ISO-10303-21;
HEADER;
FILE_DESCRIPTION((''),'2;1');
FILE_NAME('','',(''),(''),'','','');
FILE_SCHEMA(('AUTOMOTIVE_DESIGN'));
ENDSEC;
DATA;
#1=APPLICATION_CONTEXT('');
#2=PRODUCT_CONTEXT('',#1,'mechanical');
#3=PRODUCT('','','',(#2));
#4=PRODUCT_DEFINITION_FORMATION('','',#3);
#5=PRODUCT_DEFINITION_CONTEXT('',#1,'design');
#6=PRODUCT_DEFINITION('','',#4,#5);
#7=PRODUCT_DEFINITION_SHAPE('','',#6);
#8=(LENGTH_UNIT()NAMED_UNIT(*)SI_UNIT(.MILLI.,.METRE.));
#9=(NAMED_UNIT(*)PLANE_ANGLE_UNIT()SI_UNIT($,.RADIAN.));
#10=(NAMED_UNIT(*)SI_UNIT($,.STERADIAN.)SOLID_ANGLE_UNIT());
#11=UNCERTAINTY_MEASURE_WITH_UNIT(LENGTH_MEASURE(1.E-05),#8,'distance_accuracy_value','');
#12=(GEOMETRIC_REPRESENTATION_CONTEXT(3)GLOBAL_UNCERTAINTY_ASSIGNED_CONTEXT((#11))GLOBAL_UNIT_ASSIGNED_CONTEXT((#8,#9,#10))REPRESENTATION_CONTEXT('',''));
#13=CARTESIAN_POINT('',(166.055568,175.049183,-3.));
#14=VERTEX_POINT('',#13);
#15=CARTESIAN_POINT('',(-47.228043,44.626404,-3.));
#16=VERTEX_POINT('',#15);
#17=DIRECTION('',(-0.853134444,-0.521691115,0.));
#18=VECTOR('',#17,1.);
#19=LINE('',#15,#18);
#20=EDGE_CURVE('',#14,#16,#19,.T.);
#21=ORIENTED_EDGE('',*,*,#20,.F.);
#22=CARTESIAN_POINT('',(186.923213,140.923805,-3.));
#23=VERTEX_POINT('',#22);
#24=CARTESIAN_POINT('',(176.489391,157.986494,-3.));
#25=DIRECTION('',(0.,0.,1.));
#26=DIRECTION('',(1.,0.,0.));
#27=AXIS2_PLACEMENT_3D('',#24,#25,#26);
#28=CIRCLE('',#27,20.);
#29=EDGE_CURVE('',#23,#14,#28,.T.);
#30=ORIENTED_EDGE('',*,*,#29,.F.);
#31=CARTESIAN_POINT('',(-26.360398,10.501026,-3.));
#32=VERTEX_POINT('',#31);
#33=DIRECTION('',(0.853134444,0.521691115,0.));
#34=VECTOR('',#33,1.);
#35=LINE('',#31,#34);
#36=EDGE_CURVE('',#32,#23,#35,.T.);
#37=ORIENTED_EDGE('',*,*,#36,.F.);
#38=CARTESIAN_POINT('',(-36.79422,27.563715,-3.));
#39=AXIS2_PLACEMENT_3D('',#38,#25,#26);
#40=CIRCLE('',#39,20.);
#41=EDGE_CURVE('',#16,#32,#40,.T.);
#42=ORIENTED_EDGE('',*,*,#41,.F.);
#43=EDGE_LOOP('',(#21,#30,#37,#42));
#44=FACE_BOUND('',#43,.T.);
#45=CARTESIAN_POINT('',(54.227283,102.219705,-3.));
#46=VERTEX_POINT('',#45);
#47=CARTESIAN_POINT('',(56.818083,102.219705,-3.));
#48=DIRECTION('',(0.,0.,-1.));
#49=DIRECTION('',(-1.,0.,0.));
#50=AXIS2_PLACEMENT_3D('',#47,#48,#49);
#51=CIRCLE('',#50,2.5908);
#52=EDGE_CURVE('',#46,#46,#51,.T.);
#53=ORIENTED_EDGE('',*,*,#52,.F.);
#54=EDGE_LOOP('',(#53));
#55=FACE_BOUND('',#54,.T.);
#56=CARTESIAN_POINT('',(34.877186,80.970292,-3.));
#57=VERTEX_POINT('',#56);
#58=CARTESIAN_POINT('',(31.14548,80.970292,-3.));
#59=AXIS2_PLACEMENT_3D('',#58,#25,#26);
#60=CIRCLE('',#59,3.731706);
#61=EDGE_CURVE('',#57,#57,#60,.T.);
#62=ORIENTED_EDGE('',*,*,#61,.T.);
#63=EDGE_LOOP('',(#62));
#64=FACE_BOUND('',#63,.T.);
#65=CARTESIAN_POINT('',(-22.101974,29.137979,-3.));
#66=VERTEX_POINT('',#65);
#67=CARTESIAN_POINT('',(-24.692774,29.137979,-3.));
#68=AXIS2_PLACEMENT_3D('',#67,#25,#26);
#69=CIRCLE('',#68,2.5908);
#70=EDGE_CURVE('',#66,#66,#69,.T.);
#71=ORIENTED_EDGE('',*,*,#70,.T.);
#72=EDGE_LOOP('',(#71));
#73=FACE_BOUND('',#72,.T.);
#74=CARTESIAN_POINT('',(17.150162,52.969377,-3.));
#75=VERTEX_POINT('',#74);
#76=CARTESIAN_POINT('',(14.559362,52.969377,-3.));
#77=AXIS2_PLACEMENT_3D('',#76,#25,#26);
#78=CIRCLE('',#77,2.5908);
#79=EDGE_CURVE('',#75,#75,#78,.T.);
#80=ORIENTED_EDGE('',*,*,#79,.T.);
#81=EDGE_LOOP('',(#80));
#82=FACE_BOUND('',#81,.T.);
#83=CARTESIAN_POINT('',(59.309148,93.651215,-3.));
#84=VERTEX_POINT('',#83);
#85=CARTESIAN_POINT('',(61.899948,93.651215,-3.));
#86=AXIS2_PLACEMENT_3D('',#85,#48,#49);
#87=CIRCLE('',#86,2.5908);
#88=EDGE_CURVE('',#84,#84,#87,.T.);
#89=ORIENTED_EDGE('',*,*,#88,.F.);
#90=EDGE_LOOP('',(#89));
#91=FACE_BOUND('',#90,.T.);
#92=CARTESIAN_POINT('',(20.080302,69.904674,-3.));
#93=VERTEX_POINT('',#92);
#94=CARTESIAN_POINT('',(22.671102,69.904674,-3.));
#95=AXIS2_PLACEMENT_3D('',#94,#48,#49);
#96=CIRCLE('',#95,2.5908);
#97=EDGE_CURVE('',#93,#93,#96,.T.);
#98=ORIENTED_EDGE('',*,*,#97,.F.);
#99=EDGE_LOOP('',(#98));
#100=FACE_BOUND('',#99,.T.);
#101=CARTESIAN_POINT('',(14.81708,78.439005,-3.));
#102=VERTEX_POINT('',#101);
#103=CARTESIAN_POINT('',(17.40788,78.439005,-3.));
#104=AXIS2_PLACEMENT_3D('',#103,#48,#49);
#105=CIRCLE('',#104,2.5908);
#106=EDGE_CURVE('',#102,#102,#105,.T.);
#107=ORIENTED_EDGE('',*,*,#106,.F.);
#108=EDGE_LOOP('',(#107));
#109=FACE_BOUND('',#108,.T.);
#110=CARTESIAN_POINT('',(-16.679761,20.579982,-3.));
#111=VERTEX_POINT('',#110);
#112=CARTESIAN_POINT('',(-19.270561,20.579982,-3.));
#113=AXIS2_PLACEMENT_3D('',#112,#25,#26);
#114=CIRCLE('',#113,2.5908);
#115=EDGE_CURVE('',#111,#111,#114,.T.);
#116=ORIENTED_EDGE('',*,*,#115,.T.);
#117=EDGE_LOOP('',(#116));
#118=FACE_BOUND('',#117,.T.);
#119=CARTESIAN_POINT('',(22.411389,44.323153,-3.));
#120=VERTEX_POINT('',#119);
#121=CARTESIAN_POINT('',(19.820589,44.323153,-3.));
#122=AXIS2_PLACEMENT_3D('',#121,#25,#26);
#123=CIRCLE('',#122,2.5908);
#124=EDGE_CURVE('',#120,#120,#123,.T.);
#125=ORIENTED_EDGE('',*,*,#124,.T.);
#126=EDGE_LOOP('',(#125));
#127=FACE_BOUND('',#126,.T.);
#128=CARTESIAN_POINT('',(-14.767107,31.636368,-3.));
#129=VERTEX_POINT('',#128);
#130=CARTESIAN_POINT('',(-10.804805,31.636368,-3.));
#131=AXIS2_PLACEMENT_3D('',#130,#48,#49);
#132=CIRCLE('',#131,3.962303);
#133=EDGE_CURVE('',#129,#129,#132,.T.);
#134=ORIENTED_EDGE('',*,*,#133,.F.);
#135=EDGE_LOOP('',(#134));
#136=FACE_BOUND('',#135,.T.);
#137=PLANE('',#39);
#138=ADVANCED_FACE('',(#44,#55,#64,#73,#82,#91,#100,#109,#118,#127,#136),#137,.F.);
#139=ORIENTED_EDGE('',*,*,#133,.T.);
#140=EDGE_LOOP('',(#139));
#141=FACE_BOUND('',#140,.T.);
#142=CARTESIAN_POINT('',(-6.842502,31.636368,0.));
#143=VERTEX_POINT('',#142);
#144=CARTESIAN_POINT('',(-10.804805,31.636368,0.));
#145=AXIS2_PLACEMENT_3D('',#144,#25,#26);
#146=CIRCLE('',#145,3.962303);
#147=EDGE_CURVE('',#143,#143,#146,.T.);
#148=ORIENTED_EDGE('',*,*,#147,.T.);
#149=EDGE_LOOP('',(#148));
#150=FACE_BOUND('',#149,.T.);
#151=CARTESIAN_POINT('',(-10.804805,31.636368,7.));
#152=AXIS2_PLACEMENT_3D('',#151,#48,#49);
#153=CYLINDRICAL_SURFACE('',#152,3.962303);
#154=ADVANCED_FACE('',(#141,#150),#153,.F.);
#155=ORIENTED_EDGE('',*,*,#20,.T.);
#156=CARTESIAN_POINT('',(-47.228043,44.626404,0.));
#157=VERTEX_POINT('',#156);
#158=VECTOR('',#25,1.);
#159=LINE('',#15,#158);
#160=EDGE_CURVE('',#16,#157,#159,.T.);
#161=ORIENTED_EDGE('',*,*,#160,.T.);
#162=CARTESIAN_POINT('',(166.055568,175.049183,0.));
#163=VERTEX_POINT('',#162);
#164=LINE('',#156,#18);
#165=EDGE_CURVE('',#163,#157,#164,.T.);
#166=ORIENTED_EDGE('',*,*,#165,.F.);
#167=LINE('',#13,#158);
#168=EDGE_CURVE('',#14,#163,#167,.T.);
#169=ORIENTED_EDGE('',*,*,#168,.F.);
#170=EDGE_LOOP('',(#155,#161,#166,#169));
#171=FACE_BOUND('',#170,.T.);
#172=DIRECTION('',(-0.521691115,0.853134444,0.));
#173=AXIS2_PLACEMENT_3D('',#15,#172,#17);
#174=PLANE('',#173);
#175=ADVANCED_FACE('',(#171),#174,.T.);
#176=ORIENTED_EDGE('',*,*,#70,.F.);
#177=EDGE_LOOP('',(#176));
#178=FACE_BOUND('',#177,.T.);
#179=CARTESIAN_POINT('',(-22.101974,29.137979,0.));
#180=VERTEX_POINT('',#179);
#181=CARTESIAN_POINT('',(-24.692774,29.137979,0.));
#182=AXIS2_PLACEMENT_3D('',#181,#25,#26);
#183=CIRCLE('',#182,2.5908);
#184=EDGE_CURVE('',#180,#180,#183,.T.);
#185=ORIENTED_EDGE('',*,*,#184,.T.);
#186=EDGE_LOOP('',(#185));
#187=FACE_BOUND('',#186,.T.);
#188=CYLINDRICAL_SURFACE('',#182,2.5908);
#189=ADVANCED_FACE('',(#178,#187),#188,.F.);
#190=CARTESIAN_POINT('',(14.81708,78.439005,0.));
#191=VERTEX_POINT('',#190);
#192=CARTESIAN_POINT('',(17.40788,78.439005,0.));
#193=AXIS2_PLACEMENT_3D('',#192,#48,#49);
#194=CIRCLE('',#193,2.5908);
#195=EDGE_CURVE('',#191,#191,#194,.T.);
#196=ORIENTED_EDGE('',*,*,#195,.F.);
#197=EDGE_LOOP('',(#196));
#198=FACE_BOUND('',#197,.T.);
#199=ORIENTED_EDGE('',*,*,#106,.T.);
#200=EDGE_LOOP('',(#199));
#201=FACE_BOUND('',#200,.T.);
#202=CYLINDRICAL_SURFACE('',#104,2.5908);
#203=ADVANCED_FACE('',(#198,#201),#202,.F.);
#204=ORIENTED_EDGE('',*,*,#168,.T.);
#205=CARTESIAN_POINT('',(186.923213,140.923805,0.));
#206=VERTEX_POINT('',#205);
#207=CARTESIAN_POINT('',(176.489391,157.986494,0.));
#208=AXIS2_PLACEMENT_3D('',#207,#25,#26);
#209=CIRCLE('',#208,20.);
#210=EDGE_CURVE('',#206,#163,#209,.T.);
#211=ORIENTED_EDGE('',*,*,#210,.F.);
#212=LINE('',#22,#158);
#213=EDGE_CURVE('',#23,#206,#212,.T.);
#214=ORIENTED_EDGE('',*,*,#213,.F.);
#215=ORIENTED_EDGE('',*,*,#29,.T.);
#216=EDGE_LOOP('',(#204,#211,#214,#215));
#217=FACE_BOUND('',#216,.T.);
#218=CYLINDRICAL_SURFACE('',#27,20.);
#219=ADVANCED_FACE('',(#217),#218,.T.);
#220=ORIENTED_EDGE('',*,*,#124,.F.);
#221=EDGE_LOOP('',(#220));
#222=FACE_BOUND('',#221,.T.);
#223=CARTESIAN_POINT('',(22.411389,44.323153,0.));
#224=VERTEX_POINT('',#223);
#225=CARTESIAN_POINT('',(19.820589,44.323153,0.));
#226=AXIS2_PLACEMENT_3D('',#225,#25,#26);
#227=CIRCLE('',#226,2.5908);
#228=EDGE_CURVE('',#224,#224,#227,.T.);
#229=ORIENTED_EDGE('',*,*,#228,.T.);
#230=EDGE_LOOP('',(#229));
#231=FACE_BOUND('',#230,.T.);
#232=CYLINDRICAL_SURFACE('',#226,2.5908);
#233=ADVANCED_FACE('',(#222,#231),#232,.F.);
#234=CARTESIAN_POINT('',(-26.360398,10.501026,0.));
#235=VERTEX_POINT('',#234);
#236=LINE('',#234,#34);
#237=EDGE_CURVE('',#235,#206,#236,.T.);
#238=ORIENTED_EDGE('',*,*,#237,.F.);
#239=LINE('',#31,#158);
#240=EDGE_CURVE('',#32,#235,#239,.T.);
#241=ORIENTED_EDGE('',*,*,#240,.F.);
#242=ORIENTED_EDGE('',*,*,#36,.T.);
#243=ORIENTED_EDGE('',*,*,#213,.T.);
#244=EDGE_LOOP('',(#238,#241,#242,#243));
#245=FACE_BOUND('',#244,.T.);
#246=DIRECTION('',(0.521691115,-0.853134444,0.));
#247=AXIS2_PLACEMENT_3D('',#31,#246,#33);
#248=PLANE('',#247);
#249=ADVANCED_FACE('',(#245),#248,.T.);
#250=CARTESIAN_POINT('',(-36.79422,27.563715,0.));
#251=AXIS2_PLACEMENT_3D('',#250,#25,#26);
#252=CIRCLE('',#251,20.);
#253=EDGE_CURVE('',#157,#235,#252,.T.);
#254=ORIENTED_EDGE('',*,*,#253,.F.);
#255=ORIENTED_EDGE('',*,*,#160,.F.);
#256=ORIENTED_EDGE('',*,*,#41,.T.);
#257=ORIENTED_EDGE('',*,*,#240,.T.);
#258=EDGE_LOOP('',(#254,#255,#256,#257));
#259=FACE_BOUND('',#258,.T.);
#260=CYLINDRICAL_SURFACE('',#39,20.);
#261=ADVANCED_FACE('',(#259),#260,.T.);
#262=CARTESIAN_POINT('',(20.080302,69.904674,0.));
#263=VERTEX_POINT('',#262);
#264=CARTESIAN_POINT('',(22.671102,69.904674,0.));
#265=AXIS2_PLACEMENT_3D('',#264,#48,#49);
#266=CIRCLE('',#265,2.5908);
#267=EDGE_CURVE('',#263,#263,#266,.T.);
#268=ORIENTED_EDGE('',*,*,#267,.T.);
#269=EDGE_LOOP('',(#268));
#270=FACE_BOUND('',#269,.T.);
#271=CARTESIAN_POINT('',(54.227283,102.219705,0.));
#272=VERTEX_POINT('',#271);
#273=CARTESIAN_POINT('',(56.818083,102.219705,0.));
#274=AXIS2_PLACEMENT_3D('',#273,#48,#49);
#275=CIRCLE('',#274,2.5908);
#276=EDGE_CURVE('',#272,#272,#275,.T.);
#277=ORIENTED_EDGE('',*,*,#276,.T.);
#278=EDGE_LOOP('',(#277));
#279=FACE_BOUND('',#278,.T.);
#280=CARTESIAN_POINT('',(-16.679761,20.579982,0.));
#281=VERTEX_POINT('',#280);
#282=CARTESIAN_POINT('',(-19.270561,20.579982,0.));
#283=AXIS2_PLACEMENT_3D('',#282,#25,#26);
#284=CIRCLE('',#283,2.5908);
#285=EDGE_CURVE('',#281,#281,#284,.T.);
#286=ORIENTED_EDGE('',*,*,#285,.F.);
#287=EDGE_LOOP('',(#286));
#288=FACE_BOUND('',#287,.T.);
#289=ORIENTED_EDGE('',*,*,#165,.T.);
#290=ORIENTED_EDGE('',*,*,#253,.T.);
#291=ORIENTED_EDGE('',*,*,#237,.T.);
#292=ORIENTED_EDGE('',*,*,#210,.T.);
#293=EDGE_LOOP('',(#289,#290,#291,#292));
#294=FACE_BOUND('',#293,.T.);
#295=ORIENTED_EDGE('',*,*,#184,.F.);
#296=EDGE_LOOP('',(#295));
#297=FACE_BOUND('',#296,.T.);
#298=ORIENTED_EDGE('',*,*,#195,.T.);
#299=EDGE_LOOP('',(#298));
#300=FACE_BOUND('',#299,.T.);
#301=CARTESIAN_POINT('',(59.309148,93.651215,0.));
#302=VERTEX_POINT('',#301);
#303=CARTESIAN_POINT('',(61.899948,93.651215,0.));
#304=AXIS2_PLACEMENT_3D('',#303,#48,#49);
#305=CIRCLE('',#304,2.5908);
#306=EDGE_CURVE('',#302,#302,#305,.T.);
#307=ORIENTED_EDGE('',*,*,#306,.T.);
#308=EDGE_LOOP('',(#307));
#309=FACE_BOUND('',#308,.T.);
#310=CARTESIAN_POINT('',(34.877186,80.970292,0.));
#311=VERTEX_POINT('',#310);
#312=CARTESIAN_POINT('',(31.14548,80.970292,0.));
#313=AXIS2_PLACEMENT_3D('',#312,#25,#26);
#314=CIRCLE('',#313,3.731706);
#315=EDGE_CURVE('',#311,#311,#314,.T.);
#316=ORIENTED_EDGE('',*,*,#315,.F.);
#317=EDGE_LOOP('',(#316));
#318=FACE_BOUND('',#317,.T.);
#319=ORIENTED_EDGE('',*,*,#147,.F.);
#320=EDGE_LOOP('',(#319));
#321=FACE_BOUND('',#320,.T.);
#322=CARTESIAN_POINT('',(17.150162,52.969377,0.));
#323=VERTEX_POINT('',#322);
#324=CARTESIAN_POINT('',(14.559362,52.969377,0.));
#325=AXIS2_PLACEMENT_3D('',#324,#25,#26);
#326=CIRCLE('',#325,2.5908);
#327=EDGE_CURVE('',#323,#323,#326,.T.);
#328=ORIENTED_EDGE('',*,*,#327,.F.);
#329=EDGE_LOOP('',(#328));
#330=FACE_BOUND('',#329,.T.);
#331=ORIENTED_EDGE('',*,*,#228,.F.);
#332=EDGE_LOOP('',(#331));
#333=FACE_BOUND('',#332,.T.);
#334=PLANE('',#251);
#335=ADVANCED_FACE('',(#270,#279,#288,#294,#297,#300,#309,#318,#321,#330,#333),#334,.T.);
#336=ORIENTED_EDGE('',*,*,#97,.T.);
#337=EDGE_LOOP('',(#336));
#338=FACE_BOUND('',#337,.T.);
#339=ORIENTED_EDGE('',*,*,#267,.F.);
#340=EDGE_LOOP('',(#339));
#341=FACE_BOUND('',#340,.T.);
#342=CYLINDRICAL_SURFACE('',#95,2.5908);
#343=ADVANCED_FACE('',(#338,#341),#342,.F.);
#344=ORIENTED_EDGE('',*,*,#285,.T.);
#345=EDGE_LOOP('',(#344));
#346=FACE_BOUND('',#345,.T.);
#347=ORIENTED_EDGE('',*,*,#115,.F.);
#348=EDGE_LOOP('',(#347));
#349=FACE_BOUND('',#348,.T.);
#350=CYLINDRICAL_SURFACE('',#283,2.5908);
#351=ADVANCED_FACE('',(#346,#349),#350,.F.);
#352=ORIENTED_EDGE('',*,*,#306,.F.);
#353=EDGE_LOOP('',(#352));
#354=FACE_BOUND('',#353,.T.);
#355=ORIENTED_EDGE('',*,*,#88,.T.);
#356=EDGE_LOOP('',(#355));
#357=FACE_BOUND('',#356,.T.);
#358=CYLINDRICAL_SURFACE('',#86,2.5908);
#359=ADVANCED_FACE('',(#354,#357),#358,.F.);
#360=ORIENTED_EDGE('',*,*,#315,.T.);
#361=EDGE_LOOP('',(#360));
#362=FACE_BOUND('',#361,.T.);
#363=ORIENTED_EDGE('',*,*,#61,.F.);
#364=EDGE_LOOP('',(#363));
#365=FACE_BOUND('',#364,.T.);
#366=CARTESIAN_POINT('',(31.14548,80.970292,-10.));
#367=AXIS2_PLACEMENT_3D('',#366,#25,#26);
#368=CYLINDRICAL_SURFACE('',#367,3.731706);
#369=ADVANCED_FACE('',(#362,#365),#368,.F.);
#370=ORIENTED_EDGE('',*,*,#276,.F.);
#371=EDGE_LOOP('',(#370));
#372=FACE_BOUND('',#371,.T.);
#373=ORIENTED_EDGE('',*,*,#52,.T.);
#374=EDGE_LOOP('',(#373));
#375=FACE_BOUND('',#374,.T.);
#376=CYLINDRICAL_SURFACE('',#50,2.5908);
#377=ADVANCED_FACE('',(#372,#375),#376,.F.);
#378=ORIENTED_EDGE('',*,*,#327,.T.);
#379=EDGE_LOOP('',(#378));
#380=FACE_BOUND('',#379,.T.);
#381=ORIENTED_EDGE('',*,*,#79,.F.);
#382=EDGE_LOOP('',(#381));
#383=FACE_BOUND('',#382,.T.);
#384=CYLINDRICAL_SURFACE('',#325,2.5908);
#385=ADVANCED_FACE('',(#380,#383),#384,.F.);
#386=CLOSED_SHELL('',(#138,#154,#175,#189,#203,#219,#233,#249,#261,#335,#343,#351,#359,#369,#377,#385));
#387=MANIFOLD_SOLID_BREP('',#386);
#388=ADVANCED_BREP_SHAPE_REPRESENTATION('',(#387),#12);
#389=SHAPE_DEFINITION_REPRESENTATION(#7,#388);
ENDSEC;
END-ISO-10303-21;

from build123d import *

# Parameters (mm, degrees)
BASE_FLANGE3_DEPTH         = 3
SKETCH2_R                  = 3.731705756
CUT_EXTRUDE1_DEPTH         = 10
F_6_0_204_DIAMETER_SLOT2_D = 5.1816
F_6_0_204_DIAMETER_SLOT3_D = 5.1816
F_6_0_204_DIAMETER_SLOT4_D = 5.1816
SKETCH11_R                 = 3.962302528
CUT_EXTRUDE2_DEPTH         = 10


# Sheet-metal steps are written as plain solids
with BuildPart() as part:
    # Sketch1 → Base-Flange3 (new body)
    with BuildSketch(Plane.XY):
        with BuildLine():
            Line((-47.22804279, 44.626403811), (166.055568315, 175.049182627))
            ThreePointArc((166.055568315, 175.049182627), (193.552079509, 168.420316044), (186.923212926, 140.923804851))
            Line((186.923212926, 140.923804851), (-26.360398179, 10.501026034))
            ThreePointArc((-26.360398179, 10.501026034), (-53.856909373, 17.129892617), (-47.22804279, 44.626403811))
        make_face()
    extrude(amount=-BASE_FLANGE3_DEPTH)

    # Sketch2 → Cut-Extrude1 (cut)
    with BuildSketch(Plane.XY):
        with Locations((31.145480049, 80.970292312)):
            Circle(SKETCH2_R)
    extrude(amount=-CUT_EXTRUDE1_DEPTH, mode=Mode.SUBTRACT)

    # #6 (0.204) Diameter Slot2 (through all)
    with Locations(Plane(origin=(0, 0, -3), x_dir=(-1, 0, 0), z_dir=(0, 0, -1))):
        with Locations((-17.407880198, 78.439004647), (-22.671102144, 69.904673863)):
            Hole(F_6_0_204_DIAMETER_SLOT2_D / 2)

    # #6 (0.204) Diameter Slot3 (through all)
    with Locations(Plane(origin=(0, 0, -3), x_dir=(-1, 0, 0), z_dir=(0, 0, -1))):
        with Locations((-56.818082529, 102.219704658), (-61.899947849, 93.651215053)):
            Hole(F_6_0_204_DIAMETER_SLOT3_D / 2)

    # #6 (0.204) Diameter Slot4 (through all)
    with Locations(Plane.XY):
        with Locations((19.820589148, 44.323153185), (14.559362277, 52.969376644), (-19.270561455, 20.579982386), (-24.692774151, 29.137979438)):
            Hole(F_6_0_204_DIAMETER_SLOT4_D / 2)

    # Sketch11 → Cut-Extrude2 (cut)
    with BuildSketch(Plane(origin=(0, 0, -3), x_dir=(-1, 0, 0), z_dir=(0, 0, -1))):
        with Locations((10.804804657, 31.636368095)):
            Circle(SKETCH11_R)
    extrude(amount=-CUT_EXTRUDE2_DEPTH, mode=Mode.SUBTRACT)


solid = part.part
